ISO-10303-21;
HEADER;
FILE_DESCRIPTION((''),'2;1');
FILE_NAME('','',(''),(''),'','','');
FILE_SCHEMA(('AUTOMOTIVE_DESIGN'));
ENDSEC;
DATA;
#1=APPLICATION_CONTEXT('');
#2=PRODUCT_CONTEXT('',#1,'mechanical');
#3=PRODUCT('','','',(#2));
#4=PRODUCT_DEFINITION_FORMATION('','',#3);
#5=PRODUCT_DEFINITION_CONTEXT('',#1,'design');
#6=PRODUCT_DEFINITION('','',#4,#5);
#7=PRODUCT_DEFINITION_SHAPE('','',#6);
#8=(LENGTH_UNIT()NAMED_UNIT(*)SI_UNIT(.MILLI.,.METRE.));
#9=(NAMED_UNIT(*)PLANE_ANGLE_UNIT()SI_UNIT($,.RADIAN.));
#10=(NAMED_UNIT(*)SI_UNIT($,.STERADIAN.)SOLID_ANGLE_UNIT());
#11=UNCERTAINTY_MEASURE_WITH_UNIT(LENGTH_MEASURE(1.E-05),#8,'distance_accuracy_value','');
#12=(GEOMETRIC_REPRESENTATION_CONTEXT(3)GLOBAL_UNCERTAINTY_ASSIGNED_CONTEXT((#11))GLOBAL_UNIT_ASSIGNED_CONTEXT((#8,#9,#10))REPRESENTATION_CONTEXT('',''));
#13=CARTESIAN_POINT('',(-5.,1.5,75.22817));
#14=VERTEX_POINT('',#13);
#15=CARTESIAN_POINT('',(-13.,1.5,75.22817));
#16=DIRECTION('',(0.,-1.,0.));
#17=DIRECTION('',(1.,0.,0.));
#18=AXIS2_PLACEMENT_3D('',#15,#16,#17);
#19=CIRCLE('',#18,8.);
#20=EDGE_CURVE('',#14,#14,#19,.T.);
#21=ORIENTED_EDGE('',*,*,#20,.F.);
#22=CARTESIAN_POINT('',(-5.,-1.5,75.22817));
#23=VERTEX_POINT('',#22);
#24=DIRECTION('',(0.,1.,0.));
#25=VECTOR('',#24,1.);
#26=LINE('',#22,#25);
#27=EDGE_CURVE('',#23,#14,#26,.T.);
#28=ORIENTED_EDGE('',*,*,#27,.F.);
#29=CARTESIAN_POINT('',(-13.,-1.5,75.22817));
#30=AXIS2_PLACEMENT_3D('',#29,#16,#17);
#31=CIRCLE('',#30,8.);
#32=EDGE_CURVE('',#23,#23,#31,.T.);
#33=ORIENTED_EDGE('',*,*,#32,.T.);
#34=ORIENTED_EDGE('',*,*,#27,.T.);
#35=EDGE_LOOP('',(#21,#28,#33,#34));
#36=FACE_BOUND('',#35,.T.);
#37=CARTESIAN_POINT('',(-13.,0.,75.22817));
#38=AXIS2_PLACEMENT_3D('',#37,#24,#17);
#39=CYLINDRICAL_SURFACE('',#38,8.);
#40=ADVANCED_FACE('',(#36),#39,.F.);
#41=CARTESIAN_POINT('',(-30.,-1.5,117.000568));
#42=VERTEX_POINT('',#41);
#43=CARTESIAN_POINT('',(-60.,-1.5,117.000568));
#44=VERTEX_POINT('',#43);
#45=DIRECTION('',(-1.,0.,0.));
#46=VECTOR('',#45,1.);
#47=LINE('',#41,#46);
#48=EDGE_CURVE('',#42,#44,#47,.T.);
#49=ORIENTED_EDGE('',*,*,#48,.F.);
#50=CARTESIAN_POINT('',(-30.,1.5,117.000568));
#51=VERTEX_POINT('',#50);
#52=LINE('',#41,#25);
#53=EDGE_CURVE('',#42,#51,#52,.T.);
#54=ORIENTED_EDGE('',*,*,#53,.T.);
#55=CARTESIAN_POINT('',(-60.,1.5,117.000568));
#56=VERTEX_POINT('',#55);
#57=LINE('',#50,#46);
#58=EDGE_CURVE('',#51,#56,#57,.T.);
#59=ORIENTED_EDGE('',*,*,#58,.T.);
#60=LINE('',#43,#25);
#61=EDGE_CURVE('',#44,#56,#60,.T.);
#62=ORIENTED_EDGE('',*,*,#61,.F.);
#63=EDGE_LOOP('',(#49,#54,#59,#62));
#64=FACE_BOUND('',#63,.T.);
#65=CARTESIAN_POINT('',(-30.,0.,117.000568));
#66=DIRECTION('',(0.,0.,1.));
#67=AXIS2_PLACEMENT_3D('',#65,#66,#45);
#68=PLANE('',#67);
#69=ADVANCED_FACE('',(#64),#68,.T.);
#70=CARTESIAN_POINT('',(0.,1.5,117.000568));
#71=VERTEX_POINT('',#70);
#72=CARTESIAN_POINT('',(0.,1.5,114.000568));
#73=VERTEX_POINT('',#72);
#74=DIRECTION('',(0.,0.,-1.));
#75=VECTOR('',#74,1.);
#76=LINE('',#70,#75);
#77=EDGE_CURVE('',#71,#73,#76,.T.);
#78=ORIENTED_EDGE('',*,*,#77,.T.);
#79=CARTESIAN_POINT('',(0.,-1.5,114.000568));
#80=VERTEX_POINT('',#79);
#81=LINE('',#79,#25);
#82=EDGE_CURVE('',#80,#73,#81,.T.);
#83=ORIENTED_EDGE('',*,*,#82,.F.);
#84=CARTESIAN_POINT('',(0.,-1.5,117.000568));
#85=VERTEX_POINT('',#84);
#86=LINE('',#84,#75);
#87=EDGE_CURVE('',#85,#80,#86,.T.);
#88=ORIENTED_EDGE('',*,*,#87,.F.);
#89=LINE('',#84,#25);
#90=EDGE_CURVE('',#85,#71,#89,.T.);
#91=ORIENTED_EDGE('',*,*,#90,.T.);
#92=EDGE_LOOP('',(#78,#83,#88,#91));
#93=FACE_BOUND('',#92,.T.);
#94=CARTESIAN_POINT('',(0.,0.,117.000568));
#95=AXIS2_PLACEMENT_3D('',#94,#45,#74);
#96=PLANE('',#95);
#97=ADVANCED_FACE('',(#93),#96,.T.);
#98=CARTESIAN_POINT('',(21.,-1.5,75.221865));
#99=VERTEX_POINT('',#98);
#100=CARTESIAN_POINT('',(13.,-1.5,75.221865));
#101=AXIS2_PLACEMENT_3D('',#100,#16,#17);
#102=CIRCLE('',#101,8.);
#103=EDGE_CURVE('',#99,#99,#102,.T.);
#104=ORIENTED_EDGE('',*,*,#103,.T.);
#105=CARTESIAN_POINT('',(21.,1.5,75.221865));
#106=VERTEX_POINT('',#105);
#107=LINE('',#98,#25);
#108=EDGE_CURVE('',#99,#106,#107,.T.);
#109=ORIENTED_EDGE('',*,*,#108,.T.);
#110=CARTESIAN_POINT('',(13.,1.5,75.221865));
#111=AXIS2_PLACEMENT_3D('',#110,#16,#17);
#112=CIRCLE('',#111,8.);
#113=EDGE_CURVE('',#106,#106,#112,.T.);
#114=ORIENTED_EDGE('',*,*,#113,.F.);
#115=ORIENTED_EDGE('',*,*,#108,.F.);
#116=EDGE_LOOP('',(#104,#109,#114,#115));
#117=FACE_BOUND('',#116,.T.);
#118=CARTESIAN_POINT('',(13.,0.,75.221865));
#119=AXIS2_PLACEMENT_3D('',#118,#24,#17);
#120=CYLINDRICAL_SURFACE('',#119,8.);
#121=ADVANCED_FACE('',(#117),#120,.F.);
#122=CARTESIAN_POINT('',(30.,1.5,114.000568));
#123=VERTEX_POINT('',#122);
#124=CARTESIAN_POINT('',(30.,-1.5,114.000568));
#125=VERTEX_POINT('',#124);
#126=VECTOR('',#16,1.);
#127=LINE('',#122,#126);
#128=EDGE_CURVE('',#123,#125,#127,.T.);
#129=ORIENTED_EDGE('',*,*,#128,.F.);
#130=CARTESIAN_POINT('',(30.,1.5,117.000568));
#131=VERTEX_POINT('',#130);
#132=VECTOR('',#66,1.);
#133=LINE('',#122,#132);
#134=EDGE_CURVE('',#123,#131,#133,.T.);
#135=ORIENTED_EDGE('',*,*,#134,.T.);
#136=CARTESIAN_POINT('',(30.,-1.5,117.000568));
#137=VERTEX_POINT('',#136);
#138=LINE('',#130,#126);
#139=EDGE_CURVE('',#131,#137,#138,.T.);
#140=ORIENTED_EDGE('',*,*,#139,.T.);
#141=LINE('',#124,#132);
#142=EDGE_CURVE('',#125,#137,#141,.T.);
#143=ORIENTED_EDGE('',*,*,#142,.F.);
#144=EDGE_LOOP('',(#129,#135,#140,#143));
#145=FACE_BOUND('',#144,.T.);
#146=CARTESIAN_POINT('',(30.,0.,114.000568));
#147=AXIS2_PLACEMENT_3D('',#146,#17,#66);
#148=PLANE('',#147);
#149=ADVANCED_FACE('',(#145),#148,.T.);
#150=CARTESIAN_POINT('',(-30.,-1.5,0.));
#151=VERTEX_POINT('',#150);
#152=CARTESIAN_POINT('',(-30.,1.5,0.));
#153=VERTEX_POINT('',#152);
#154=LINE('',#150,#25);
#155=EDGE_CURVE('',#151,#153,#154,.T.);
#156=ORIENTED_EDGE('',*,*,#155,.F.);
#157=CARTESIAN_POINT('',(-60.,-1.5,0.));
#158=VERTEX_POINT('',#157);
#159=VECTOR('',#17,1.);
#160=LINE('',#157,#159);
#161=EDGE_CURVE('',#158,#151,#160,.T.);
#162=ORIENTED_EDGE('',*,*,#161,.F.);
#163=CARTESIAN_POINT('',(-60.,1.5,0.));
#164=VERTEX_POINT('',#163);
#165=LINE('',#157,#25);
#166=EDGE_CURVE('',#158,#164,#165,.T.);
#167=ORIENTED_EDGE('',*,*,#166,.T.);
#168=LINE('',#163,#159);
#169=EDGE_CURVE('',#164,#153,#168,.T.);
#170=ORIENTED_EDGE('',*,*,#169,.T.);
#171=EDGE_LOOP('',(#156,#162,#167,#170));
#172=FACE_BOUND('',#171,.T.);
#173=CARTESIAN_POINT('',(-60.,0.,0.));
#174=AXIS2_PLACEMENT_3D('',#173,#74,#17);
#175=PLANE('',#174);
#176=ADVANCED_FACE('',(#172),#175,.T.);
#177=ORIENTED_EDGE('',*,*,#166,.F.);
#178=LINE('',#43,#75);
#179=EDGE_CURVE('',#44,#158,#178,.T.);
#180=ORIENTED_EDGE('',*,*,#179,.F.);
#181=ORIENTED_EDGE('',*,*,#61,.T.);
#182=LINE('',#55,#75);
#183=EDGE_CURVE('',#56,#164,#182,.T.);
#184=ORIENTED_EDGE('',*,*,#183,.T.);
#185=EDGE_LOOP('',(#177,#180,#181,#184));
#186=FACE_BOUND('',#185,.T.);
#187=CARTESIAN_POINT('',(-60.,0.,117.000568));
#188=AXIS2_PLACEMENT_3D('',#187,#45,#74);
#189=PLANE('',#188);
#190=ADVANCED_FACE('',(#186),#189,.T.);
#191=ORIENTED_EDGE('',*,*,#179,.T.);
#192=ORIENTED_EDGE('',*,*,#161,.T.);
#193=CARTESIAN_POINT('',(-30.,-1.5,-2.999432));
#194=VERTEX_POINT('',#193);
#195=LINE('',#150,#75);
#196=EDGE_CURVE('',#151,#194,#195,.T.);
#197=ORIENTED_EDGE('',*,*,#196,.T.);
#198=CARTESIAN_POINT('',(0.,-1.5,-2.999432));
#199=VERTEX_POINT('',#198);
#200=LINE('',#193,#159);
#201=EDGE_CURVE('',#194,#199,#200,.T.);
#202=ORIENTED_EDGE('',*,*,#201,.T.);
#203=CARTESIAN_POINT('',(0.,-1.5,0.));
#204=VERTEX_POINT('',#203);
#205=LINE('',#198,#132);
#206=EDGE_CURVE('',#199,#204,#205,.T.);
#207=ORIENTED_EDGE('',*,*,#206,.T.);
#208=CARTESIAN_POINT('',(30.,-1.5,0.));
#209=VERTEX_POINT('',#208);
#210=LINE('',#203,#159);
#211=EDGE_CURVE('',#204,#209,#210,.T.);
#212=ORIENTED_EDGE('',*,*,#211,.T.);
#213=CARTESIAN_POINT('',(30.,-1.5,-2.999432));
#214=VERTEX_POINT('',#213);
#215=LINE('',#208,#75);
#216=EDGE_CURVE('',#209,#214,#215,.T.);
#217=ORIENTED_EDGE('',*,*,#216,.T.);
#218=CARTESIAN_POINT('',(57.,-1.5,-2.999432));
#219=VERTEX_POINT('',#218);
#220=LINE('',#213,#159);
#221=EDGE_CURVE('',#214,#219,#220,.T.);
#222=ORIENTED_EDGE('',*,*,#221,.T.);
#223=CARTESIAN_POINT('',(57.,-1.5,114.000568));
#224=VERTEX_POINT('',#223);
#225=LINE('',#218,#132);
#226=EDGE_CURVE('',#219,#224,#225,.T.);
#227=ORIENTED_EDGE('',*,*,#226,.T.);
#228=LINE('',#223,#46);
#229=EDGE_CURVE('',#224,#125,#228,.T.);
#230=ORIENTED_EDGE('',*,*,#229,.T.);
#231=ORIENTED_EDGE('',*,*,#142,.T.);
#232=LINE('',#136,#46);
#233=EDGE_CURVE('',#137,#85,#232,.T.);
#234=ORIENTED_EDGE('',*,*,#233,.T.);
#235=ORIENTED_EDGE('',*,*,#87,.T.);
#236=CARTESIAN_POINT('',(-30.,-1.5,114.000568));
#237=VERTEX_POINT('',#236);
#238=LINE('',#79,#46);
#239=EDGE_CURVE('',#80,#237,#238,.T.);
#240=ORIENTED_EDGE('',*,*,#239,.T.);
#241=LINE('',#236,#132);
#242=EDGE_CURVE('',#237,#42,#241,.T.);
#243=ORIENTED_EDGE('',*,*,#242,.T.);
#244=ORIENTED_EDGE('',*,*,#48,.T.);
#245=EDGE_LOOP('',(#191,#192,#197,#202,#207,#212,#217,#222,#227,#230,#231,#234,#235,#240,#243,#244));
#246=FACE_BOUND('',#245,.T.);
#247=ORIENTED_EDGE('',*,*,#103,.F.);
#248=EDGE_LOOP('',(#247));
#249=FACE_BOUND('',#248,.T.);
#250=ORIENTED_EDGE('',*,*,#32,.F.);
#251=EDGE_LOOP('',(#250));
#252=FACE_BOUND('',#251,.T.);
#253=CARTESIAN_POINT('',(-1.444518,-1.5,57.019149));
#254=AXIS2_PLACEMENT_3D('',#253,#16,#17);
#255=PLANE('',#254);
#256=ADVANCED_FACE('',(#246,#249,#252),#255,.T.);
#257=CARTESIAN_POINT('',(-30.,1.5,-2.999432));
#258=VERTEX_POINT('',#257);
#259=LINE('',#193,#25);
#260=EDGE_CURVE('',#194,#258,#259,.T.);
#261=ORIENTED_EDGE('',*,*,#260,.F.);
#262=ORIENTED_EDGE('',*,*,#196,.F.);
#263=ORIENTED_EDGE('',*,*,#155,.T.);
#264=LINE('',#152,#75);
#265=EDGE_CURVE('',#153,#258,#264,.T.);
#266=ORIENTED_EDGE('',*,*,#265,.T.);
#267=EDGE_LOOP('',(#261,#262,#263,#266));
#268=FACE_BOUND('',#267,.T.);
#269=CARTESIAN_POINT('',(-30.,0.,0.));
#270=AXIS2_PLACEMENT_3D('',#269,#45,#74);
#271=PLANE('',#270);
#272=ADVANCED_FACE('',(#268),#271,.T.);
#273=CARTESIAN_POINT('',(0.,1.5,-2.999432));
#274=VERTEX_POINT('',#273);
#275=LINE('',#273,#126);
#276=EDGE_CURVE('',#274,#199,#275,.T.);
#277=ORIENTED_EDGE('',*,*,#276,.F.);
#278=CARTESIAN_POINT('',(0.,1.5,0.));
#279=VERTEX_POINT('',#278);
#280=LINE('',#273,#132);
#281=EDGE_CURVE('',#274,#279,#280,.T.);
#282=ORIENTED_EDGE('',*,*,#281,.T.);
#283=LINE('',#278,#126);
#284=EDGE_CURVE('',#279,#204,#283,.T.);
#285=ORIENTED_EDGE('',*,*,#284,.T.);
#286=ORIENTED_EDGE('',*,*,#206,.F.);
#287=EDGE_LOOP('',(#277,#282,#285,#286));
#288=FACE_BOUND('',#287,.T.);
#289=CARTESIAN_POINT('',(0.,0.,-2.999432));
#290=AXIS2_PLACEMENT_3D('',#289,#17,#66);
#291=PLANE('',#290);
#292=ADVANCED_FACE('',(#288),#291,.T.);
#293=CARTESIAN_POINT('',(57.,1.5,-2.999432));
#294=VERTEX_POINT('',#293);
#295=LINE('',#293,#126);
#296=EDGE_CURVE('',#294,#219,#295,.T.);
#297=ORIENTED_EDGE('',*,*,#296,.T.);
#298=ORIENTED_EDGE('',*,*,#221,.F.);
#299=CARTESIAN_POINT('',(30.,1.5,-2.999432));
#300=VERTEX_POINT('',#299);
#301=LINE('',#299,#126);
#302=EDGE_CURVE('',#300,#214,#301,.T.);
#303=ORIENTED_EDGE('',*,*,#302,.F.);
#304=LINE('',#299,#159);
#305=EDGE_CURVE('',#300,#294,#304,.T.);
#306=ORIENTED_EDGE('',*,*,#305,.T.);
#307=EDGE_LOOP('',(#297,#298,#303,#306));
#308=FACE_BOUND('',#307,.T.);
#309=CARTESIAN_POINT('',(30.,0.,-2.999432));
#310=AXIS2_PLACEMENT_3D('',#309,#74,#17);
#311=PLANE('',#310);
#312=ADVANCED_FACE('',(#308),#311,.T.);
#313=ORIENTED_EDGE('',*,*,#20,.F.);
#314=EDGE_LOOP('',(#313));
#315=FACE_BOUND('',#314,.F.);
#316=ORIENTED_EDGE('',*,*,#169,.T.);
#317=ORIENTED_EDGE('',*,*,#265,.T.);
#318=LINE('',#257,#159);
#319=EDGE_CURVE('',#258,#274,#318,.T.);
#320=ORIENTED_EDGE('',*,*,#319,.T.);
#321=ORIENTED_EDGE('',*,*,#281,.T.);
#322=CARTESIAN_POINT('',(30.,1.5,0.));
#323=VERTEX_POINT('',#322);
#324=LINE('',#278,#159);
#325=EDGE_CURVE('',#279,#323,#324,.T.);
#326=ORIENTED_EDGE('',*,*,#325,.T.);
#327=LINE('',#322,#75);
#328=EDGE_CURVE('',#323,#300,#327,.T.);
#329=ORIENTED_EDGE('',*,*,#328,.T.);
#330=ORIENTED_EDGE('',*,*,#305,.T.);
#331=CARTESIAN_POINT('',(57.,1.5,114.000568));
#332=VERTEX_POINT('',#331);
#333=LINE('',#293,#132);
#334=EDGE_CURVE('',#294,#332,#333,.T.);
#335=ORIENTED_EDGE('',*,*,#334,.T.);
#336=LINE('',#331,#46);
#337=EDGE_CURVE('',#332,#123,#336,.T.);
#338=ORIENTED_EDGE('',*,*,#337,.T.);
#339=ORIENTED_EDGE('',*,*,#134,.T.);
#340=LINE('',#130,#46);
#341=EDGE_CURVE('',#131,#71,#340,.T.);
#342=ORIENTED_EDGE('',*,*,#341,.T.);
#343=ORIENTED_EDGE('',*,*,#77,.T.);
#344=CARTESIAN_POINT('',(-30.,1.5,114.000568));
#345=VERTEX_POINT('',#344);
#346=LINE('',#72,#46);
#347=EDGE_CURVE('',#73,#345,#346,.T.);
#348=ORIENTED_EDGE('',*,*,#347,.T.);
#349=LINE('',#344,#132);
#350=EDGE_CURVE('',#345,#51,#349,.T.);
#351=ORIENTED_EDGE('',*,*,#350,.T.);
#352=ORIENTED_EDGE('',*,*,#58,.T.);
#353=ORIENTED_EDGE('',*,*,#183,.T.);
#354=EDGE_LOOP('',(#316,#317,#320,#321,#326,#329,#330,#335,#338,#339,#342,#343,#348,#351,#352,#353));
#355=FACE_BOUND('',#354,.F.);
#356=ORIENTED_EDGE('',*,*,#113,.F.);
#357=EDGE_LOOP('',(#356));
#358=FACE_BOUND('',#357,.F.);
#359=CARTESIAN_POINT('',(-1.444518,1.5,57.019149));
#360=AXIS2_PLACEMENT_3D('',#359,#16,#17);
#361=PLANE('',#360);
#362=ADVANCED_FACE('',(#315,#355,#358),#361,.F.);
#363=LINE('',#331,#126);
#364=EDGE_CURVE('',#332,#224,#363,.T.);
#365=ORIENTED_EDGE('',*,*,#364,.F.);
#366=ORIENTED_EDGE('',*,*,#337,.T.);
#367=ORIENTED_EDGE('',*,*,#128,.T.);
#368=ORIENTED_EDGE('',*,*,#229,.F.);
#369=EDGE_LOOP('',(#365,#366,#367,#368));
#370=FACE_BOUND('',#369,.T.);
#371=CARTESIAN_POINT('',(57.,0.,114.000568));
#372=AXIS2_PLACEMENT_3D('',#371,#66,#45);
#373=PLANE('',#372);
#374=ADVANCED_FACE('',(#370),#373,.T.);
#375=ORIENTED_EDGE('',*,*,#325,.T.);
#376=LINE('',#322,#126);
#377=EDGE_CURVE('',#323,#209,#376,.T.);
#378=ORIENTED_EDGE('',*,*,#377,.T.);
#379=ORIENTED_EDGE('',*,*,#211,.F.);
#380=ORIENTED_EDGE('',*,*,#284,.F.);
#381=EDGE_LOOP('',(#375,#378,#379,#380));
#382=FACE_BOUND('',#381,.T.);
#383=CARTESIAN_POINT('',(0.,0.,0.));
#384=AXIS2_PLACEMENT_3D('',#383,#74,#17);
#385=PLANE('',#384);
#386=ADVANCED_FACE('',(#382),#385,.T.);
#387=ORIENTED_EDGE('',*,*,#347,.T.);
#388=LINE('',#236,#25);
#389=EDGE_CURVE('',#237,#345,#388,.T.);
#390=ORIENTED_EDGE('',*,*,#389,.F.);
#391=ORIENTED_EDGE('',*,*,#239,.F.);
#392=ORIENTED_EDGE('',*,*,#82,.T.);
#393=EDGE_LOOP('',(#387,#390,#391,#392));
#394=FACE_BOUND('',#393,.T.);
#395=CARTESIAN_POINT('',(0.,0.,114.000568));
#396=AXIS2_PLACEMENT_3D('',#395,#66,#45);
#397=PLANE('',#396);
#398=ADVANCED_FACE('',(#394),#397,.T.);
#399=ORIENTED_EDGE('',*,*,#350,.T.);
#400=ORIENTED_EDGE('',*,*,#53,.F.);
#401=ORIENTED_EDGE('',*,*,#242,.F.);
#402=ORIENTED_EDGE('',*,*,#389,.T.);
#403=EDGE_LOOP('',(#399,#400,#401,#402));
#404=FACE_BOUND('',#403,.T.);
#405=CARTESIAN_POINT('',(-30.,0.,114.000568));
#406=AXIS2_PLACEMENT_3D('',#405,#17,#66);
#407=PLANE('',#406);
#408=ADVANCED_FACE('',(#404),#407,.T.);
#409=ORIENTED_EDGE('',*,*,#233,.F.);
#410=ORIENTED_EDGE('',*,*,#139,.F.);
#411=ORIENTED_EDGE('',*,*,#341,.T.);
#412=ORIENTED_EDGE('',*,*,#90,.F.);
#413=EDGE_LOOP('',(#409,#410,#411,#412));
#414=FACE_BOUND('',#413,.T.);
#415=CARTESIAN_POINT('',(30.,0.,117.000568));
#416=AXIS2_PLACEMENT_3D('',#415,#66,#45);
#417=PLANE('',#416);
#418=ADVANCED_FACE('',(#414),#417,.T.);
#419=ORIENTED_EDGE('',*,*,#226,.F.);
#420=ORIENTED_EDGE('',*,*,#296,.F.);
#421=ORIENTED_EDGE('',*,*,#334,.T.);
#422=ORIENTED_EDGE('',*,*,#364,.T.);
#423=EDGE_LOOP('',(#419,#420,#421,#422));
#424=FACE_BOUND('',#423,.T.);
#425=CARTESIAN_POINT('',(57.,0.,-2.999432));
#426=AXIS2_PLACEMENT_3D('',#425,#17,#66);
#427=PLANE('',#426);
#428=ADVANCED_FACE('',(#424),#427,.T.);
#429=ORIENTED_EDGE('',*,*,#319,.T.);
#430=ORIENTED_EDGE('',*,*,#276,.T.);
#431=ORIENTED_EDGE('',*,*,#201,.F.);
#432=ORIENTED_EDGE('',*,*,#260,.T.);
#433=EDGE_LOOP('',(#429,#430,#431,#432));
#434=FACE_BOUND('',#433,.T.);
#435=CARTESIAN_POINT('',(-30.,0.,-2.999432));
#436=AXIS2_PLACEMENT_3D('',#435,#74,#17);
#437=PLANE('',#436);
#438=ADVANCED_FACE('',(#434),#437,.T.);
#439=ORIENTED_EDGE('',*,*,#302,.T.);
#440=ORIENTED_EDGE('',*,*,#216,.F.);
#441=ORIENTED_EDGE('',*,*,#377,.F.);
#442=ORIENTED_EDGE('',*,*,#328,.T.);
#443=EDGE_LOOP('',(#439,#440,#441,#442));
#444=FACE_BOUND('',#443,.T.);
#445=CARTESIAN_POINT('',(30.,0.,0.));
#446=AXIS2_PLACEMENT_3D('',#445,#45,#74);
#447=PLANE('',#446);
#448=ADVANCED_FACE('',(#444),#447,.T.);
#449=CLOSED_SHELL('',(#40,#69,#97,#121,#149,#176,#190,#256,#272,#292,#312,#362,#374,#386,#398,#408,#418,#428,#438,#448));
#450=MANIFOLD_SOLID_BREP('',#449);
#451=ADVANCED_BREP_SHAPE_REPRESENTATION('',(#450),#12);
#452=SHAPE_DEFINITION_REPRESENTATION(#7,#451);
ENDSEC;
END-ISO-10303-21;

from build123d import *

# Parameters (mm, degrees)
F0_R     = 8
F1_DEPTH = 1.5


# Not quite as in the source:
# - a feature names something its author has since deleted; it is built from what else it names


with BuildPart() as f1:
    # F0 (on Front) → F1 (new body, symmetric)
    with BuildSketch(Plane.XZ):
        Polygon((-30, -2.9994321861), (0, -2.9994321861), (0, 0), (30, 0), (30, -2.9994321861), (57, -2.9994321861), (57, 114.0005678139), (30, 114.0005678139), (30, 117.0005678139), (0, 117.0005678139), (0, 114.0005678139), (-30, 114.0005678139), (-30, 117.0005678139), (-60, 117.0005678139), (-60, 0), (-30, 0), align=None)
        with Locations((-13, 75.2281695604)):
            Circle(F0_R, mode=Mode.SUBTRACT)
        with Locations((13, 75.2218647463)):
            Circle(F0_R, mode=Mode.SUBTRACT)
    extrude(amount=F1_DEPTH, both=True)


solid = f1.part
